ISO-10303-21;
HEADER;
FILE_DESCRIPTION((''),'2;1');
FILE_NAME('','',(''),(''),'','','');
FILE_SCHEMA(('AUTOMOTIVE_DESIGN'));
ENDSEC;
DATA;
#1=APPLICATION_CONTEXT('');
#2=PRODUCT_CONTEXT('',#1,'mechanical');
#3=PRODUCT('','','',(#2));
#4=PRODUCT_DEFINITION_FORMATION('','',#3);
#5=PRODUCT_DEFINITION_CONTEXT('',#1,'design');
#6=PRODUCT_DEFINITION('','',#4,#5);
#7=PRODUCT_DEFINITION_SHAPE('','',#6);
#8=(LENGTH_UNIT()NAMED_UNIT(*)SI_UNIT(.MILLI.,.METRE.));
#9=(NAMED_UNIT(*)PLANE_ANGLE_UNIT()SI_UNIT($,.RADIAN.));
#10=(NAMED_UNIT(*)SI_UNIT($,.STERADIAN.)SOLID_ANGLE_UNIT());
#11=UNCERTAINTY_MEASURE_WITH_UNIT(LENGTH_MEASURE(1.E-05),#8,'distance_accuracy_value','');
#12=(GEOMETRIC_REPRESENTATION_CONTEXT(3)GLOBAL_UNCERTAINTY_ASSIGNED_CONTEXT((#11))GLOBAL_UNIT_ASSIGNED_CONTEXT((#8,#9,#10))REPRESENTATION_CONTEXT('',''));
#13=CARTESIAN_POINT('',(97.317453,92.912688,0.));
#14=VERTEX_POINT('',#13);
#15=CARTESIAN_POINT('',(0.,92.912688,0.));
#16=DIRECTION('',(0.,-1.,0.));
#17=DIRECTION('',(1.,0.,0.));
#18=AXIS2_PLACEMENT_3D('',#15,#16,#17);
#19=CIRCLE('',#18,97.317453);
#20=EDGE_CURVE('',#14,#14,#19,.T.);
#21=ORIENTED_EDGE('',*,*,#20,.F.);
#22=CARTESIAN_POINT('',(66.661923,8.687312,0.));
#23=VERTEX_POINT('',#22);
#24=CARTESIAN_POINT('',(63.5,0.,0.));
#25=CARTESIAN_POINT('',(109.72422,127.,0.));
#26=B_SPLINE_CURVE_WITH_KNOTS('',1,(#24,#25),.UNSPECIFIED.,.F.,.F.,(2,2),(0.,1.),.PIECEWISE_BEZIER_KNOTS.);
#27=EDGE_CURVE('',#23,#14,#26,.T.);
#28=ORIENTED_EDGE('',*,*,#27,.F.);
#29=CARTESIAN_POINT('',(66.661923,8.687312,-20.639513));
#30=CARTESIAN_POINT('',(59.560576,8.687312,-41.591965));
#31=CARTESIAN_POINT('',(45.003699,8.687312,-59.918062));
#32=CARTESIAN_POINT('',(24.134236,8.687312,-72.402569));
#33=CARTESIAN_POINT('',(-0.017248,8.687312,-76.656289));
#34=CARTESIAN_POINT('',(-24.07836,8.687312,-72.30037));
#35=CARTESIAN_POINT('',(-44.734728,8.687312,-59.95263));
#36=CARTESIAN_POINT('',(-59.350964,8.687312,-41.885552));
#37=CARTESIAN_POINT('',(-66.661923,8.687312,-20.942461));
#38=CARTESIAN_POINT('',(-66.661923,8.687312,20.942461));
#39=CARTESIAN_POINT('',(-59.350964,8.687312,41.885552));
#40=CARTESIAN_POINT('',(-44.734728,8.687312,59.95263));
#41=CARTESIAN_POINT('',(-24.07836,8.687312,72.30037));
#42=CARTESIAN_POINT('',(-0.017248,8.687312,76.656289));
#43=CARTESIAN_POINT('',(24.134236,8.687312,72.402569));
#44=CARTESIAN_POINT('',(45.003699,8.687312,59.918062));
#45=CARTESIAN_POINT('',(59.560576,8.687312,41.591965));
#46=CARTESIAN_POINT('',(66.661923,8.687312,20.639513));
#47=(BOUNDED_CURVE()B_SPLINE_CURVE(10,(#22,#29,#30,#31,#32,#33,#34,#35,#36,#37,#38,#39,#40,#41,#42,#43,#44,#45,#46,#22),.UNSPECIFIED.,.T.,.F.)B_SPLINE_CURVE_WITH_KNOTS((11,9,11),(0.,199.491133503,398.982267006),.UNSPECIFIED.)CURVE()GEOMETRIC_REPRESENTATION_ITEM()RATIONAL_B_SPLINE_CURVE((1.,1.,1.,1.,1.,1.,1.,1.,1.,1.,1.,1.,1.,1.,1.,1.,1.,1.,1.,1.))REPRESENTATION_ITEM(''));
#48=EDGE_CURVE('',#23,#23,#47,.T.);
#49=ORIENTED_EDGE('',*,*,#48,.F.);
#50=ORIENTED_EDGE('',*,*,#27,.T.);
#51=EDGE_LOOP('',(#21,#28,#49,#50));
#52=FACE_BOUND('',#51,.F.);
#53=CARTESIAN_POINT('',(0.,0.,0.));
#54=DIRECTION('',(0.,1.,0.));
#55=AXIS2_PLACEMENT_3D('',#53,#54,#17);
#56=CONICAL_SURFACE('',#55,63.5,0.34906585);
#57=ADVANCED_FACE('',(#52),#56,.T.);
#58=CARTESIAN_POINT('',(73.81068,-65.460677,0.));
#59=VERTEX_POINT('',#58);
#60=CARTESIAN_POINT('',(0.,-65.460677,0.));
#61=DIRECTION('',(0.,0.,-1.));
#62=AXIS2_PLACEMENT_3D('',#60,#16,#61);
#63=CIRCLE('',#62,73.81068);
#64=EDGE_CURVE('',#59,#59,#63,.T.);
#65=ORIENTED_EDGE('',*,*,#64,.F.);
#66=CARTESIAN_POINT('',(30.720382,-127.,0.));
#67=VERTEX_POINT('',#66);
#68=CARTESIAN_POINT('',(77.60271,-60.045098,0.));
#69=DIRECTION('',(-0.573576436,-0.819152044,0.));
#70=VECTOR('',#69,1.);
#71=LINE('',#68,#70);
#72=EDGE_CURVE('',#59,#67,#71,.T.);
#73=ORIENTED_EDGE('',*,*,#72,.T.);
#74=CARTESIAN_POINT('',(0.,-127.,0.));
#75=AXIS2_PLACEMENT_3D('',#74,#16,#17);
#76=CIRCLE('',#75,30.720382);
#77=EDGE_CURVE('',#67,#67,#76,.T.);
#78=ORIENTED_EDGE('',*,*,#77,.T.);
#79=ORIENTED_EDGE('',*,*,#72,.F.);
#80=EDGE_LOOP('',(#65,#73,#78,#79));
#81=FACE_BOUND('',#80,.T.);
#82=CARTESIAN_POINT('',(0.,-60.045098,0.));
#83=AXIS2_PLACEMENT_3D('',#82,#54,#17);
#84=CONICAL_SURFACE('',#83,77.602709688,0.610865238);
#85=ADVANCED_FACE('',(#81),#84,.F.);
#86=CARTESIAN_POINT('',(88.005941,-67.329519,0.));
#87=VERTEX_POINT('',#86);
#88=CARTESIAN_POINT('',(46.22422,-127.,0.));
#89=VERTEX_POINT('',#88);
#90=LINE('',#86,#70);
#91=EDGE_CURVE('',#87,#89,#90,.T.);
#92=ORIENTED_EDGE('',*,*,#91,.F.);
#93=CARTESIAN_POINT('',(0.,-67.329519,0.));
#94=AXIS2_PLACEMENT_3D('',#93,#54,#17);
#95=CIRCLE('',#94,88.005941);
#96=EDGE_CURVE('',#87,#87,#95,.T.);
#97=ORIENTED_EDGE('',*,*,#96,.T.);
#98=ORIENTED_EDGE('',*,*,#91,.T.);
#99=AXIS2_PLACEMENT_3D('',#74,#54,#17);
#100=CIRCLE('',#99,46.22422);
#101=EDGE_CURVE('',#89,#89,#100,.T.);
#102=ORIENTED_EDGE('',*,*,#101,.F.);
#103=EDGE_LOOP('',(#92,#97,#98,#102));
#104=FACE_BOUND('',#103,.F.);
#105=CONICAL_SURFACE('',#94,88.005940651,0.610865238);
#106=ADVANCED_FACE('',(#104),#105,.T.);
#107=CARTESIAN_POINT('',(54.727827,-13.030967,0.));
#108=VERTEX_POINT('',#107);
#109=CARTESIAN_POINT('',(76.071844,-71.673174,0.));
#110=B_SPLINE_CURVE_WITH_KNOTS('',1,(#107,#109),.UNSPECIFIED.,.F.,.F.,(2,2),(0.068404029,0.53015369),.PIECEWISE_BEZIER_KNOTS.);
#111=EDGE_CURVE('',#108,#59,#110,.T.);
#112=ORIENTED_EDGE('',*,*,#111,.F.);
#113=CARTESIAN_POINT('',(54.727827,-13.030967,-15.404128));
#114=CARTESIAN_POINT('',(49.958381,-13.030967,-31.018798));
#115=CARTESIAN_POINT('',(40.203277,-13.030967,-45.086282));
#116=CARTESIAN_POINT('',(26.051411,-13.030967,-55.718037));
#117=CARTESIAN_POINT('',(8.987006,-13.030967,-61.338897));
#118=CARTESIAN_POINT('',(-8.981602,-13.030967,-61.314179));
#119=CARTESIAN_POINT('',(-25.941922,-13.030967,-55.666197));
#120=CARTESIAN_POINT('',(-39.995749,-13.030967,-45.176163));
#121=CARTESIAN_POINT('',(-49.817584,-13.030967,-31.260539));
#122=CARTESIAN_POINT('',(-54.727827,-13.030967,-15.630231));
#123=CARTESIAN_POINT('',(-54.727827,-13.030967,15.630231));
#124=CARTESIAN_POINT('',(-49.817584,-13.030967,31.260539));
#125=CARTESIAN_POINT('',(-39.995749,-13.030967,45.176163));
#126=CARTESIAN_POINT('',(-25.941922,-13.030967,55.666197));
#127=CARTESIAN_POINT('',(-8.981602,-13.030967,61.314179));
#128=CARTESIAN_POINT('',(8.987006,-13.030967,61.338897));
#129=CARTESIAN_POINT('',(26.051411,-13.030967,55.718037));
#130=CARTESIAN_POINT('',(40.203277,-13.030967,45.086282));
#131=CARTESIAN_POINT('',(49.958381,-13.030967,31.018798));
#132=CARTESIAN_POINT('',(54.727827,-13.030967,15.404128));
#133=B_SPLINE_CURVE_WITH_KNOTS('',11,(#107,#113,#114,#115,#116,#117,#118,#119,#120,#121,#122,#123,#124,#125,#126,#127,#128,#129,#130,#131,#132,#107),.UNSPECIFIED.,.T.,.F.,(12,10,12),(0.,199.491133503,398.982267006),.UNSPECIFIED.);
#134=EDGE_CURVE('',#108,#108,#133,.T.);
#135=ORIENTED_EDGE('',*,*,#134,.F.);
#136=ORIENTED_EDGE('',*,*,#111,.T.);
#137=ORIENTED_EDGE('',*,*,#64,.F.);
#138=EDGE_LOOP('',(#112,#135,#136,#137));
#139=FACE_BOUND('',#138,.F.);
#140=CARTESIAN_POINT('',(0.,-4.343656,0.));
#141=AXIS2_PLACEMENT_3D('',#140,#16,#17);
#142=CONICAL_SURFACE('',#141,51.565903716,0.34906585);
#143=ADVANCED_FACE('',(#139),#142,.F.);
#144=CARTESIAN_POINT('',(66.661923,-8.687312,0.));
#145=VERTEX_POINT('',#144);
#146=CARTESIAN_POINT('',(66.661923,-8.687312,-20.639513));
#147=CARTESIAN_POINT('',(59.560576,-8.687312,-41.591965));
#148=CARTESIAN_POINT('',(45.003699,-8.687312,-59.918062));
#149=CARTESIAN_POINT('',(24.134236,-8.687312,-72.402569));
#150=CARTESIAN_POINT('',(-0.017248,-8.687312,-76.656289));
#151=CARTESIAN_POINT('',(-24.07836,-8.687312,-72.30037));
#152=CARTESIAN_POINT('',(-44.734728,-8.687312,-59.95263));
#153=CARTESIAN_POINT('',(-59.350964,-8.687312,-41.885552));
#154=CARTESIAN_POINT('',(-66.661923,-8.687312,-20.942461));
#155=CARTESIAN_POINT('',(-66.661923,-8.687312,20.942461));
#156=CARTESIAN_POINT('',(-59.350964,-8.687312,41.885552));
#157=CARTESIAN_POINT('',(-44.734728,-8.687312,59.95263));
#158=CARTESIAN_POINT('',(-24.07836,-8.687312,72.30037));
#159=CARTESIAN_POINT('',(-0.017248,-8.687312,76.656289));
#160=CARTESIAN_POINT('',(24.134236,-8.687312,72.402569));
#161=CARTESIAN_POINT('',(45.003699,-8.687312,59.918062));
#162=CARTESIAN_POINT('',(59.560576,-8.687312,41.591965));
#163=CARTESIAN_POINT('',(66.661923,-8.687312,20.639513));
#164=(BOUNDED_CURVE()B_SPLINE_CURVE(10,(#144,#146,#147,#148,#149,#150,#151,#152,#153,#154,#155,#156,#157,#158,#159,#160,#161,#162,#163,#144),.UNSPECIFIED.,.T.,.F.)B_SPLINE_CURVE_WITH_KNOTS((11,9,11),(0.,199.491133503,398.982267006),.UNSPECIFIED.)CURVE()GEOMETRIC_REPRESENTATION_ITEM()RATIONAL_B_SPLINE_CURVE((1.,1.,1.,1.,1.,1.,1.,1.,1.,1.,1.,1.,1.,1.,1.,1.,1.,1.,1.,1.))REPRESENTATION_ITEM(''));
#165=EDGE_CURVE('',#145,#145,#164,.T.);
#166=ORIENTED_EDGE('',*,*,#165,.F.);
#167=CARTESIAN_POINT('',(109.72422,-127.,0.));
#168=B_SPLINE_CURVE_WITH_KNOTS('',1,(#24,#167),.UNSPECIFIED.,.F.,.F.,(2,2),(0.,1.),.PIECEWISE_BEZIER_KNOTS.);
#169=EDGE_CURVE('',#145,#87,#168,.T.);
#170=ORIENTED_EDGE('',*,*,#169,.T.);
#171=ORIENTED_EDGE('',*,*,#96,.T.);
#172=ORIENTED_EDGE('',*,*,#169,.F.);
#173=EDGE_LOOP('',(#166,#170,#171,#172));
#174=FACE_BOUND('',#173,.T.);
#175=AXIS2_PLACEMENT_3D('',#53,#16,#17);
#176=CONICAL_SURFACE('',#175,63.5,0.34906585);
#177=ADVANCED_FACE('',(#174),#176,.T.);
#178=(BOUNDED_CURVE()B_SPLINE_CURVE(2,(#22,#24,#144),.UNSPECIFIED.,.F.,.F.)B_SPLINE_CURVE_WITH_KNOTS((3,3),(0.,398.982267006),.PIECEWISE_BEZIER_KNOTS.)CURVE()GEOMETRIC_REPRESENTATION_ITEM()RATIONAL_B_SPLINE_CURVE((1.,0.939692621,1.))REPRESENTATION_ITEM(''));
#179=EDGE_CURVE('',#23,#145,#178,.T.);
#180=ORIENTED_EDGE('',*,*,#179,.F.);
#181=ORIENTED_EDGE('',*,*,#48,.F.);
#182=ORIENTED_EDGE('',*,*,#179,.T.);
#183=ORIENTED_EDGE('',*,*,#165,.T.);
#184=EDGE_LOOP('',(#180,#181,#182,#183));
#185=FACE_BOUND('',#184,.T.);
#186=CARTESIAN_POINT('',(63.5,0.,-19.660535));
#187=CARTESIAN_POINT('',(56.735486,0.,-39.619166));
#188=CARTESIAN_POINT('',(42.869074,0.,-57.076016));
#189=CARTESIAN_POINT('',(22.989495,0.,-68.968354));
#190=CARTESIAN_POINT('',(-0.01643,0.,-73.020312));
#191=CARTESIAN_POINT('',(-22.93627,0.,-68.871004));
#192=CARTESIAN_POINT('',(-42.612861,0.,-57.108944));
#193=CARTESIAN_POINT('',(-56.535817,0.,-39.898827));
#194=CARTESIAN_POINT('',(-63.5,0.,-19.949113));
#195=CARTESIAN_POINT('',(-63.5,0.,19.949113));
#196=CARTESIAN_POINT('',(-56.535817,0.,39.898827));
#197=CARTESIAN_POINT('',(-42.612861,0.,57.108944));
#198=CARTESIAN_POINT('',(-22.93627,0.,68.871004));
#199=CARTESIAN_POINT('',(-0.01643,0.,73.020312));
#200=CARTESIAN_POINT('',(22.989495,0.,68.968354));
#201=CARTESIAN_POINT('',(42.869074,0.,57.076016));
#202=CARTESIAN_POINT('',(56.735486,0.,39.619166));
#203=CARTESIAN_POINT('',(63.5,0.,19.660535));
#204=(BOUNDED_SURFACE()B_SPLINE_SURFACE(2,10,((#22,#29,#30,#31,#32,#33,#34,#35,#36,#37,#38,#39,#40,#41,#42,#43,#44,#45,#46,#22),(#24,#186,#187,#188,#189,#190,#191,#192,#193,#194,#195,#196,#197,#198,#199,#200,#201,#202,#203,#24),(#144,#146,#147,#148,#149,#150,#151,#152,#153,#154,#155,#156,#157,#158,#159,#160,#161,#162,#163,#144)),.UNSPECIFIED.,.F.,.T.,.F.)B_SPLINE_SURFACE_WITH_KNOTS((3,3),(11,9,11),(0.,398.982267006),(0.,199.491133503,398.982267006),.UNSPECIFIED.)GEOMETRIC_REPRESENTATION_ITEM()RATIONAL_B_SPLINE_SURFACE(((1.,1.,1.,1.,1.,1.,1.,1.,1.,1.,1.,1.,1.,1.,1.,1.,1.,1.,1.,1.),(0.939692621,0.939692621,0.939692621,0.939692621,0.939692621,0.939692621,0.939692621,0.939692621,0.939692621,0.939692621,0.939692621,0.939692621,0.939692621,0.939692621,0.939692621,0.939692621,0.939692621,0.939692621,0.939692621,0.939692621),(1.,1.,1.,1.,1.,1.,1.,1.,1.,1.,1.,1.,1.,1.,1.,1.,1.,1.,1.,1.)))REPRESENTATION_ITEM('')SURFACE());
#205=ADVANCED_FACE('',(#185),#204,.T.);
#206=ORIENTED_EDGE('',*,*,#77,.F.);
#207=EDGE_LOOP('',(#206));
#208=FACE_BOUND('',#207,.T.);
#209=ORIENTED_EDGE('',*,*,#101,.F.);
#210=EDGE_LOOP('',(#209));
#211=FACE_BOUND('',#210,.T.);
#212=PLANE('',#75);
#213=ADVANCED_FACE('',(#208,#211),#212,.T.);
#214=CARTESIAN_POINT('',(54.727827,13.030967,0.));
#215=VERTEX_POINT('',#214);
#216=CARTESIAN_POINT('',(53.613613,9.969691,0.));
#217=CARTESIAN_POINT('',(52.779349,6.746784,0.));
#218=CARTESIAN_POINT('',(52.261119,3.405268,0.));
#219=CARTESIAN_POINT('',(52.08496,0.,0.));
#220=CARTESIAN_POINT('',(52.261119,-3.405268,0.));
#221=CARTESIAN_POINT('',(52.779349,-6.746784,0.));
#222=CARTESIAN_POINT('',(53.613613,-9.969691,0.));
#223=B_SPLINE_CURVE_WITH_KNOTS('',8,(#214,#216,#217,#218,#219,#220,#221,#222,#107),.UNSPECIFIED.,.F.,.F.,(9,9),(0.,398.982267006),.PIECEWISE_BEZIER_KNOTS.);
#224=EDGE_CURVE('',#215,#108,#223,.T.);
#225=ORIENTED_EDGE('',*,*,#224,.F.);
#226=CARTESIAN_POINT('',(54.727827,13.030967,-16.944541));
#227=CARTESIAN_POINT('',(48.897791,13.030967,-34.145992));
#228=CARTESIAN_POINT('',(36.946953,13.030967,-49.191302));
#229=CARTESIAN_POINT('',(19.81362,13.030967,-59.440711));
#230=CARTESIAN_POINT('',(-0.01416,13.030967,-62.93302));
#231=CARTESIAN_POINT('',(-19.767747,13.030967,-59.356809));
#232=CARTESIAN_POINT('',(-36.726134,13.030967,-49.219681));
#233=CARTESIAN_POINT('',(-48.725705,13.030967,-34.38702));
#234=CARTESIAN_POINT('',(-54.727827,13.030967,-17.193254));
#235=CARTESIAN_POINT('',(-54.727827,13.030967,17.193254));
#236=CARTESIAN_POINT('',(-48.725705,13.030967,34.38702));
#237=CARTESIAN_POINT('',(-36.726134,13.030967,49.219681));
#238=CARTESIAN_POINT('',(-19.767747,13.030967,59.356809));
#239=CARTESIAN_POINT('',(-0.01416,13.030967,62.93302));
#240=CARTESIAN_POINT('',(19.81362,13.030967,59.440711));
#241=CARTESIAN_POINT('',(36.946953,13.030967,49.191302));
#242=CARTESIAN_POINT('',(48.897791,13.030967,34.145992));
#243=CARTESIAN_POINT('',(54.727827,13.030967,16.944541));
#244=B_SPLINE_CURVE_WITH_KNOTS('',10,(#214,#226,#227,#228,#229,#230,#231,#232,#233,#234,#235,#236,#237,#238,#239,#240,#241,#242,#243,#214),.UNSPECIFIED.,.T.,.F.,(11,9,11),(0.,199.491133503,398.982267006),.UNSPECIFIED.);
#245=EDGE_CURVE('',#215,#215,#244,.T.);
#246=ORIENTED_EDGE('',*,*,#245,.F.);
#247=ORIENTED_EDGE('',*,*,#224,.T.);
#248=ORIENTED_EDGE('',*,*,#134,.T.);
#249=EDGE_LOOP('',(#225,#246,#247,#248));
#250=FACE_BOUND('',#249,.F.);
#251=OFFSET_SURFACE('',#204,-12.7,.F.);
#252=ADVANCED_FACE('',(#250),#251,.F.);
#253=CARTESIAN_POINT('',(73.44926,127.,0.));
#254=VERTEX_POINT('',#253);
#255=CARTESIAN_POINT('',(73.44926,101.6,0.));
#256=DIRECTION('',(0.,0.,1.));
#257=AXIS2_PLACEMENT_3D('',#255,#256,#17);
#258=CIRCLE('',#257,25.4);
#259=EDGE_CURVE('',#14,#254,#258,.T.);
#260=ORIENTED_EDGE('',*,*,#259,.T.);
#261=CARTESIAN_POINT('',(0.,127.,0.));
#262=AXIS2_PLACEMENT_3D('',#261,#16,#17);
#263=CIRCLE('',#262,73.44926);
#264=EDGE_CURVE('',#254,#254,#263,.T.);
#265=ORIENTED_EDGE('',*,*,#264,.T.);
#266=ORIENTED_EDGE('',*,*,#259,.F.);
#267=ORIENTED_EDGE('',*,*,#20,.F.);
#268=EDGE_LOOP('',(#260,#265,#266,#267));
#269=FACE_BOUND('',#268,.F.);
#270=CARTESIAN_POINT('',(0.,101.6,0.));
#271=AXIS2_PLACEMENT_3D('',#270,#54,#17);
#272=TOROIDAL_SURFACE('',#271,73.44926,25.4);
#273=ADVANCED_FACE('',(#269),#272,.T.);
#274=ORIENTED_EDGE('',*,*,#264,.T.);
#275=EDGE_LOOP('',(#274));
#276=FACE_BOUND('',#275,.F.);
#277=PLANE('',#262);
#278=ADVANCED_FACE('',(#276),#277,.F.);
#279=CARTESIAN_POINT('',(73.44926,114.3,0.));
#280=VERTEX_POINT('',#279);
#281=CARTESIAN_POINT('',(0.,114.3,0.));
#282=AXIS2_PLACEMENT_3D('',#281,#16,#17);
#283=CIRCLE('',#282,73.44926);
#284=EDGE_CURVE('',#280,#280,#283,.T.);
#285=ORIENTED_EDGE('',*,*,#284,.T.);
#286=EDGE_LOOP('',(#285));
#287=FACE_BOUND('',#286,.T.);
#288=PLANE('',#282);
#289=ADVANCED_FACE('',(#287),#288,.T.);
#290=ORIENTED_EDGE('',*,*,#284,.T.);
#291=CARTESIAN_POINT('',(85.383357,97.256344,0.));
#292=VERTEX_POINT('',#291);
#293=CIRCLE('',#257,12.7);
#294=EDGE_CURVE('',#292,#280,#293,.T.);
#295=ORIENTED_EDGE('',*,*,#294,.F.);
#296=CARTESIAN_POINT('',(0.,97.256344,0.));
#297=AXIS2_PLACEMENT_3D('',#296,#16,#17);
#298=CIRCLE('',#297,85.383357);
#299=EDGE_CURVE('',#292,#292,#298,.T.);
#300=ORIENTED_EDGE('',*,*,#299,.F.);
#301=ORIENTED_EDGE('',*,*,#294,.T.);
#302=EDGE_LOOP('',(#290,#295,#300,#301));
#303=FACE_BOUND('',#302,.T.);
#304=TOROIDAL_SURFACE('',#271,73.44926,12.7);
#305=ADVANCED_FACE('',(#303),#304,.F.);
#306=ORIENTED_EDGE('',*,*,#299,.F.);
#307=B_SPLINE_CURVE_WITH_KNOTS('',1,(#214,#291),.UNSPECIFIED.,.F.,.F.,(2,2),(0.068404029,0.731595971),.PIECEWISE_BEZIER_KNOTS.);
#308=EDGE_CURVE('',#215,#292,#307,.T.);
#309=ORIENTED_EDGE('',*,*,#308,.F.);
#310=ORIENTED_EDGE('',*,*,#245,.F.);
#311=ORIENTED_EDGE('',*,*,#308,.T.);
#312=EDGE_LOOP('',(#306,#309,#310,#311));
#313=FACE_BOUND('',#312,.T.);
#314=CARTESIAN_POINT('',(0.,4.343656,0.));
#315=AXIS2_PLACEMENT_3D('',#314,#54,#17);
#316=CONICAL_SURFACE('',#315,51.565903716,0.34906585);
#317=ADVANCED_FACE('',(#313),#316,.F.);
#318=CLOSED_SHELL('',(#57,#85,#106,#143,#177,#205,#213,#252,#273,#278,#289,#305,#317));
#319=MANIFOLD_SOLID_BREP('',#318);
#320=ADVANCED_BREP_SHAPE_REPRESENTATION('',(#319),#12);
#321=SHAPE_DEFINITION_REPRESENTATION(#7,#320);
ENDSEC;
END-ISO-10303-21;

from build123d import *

# Parameters (mm, degrees)
F0_R     = 63.5
F1_DEPTH = 127
F1_TAPER = -20
F2_R     = 25.4
F4_T     = -12.7


# Not quite as in the source:
# - a fillet or chamfer that OpenCascade refuses, or shapes differently, is made with other operations: its cross-section is extruded or revolved along the edge and cut away or added


with BuildPart() as f1:
    # F0 (on Front) → F1 (new body, symmetric)
    with BuildSketch(Plane.XZ):
        Circle(F0_R)
    extrude(amount=F1_DEPTH, both=True, taper=F1_TAPER)

    # F2
    f2_edges = [f1.edges().sort_by_distance(p)[0] for p in [
        (-63.5, 0, 0),
        (-109.72422, 127, 0),
    ]]
    fillet(f2_edges, radius=F2_R)

    # F3: chamfer of 63.5 on 1 edges, made by hand

    # F3_s1 → F3_t2 (revolve, cut)
    with BuildSketch(Plane.XY):
        Polygon((88.0059406506, -67.3295185801), (46.2242197518, -127), (109.7242197518, -127), align=None)
    revolve(axis=Axis((0, -127, 0), (0, 1, 0)), mode=Mode.SUBTRACT)

    # F4
    f4_openings = [f1.faces().sort_by_distance(p)[0] for p in [
        (0, -127, 0),
    ]]
    offset(amount=F4_T, openings=f4_openings)


solid = f1.part
